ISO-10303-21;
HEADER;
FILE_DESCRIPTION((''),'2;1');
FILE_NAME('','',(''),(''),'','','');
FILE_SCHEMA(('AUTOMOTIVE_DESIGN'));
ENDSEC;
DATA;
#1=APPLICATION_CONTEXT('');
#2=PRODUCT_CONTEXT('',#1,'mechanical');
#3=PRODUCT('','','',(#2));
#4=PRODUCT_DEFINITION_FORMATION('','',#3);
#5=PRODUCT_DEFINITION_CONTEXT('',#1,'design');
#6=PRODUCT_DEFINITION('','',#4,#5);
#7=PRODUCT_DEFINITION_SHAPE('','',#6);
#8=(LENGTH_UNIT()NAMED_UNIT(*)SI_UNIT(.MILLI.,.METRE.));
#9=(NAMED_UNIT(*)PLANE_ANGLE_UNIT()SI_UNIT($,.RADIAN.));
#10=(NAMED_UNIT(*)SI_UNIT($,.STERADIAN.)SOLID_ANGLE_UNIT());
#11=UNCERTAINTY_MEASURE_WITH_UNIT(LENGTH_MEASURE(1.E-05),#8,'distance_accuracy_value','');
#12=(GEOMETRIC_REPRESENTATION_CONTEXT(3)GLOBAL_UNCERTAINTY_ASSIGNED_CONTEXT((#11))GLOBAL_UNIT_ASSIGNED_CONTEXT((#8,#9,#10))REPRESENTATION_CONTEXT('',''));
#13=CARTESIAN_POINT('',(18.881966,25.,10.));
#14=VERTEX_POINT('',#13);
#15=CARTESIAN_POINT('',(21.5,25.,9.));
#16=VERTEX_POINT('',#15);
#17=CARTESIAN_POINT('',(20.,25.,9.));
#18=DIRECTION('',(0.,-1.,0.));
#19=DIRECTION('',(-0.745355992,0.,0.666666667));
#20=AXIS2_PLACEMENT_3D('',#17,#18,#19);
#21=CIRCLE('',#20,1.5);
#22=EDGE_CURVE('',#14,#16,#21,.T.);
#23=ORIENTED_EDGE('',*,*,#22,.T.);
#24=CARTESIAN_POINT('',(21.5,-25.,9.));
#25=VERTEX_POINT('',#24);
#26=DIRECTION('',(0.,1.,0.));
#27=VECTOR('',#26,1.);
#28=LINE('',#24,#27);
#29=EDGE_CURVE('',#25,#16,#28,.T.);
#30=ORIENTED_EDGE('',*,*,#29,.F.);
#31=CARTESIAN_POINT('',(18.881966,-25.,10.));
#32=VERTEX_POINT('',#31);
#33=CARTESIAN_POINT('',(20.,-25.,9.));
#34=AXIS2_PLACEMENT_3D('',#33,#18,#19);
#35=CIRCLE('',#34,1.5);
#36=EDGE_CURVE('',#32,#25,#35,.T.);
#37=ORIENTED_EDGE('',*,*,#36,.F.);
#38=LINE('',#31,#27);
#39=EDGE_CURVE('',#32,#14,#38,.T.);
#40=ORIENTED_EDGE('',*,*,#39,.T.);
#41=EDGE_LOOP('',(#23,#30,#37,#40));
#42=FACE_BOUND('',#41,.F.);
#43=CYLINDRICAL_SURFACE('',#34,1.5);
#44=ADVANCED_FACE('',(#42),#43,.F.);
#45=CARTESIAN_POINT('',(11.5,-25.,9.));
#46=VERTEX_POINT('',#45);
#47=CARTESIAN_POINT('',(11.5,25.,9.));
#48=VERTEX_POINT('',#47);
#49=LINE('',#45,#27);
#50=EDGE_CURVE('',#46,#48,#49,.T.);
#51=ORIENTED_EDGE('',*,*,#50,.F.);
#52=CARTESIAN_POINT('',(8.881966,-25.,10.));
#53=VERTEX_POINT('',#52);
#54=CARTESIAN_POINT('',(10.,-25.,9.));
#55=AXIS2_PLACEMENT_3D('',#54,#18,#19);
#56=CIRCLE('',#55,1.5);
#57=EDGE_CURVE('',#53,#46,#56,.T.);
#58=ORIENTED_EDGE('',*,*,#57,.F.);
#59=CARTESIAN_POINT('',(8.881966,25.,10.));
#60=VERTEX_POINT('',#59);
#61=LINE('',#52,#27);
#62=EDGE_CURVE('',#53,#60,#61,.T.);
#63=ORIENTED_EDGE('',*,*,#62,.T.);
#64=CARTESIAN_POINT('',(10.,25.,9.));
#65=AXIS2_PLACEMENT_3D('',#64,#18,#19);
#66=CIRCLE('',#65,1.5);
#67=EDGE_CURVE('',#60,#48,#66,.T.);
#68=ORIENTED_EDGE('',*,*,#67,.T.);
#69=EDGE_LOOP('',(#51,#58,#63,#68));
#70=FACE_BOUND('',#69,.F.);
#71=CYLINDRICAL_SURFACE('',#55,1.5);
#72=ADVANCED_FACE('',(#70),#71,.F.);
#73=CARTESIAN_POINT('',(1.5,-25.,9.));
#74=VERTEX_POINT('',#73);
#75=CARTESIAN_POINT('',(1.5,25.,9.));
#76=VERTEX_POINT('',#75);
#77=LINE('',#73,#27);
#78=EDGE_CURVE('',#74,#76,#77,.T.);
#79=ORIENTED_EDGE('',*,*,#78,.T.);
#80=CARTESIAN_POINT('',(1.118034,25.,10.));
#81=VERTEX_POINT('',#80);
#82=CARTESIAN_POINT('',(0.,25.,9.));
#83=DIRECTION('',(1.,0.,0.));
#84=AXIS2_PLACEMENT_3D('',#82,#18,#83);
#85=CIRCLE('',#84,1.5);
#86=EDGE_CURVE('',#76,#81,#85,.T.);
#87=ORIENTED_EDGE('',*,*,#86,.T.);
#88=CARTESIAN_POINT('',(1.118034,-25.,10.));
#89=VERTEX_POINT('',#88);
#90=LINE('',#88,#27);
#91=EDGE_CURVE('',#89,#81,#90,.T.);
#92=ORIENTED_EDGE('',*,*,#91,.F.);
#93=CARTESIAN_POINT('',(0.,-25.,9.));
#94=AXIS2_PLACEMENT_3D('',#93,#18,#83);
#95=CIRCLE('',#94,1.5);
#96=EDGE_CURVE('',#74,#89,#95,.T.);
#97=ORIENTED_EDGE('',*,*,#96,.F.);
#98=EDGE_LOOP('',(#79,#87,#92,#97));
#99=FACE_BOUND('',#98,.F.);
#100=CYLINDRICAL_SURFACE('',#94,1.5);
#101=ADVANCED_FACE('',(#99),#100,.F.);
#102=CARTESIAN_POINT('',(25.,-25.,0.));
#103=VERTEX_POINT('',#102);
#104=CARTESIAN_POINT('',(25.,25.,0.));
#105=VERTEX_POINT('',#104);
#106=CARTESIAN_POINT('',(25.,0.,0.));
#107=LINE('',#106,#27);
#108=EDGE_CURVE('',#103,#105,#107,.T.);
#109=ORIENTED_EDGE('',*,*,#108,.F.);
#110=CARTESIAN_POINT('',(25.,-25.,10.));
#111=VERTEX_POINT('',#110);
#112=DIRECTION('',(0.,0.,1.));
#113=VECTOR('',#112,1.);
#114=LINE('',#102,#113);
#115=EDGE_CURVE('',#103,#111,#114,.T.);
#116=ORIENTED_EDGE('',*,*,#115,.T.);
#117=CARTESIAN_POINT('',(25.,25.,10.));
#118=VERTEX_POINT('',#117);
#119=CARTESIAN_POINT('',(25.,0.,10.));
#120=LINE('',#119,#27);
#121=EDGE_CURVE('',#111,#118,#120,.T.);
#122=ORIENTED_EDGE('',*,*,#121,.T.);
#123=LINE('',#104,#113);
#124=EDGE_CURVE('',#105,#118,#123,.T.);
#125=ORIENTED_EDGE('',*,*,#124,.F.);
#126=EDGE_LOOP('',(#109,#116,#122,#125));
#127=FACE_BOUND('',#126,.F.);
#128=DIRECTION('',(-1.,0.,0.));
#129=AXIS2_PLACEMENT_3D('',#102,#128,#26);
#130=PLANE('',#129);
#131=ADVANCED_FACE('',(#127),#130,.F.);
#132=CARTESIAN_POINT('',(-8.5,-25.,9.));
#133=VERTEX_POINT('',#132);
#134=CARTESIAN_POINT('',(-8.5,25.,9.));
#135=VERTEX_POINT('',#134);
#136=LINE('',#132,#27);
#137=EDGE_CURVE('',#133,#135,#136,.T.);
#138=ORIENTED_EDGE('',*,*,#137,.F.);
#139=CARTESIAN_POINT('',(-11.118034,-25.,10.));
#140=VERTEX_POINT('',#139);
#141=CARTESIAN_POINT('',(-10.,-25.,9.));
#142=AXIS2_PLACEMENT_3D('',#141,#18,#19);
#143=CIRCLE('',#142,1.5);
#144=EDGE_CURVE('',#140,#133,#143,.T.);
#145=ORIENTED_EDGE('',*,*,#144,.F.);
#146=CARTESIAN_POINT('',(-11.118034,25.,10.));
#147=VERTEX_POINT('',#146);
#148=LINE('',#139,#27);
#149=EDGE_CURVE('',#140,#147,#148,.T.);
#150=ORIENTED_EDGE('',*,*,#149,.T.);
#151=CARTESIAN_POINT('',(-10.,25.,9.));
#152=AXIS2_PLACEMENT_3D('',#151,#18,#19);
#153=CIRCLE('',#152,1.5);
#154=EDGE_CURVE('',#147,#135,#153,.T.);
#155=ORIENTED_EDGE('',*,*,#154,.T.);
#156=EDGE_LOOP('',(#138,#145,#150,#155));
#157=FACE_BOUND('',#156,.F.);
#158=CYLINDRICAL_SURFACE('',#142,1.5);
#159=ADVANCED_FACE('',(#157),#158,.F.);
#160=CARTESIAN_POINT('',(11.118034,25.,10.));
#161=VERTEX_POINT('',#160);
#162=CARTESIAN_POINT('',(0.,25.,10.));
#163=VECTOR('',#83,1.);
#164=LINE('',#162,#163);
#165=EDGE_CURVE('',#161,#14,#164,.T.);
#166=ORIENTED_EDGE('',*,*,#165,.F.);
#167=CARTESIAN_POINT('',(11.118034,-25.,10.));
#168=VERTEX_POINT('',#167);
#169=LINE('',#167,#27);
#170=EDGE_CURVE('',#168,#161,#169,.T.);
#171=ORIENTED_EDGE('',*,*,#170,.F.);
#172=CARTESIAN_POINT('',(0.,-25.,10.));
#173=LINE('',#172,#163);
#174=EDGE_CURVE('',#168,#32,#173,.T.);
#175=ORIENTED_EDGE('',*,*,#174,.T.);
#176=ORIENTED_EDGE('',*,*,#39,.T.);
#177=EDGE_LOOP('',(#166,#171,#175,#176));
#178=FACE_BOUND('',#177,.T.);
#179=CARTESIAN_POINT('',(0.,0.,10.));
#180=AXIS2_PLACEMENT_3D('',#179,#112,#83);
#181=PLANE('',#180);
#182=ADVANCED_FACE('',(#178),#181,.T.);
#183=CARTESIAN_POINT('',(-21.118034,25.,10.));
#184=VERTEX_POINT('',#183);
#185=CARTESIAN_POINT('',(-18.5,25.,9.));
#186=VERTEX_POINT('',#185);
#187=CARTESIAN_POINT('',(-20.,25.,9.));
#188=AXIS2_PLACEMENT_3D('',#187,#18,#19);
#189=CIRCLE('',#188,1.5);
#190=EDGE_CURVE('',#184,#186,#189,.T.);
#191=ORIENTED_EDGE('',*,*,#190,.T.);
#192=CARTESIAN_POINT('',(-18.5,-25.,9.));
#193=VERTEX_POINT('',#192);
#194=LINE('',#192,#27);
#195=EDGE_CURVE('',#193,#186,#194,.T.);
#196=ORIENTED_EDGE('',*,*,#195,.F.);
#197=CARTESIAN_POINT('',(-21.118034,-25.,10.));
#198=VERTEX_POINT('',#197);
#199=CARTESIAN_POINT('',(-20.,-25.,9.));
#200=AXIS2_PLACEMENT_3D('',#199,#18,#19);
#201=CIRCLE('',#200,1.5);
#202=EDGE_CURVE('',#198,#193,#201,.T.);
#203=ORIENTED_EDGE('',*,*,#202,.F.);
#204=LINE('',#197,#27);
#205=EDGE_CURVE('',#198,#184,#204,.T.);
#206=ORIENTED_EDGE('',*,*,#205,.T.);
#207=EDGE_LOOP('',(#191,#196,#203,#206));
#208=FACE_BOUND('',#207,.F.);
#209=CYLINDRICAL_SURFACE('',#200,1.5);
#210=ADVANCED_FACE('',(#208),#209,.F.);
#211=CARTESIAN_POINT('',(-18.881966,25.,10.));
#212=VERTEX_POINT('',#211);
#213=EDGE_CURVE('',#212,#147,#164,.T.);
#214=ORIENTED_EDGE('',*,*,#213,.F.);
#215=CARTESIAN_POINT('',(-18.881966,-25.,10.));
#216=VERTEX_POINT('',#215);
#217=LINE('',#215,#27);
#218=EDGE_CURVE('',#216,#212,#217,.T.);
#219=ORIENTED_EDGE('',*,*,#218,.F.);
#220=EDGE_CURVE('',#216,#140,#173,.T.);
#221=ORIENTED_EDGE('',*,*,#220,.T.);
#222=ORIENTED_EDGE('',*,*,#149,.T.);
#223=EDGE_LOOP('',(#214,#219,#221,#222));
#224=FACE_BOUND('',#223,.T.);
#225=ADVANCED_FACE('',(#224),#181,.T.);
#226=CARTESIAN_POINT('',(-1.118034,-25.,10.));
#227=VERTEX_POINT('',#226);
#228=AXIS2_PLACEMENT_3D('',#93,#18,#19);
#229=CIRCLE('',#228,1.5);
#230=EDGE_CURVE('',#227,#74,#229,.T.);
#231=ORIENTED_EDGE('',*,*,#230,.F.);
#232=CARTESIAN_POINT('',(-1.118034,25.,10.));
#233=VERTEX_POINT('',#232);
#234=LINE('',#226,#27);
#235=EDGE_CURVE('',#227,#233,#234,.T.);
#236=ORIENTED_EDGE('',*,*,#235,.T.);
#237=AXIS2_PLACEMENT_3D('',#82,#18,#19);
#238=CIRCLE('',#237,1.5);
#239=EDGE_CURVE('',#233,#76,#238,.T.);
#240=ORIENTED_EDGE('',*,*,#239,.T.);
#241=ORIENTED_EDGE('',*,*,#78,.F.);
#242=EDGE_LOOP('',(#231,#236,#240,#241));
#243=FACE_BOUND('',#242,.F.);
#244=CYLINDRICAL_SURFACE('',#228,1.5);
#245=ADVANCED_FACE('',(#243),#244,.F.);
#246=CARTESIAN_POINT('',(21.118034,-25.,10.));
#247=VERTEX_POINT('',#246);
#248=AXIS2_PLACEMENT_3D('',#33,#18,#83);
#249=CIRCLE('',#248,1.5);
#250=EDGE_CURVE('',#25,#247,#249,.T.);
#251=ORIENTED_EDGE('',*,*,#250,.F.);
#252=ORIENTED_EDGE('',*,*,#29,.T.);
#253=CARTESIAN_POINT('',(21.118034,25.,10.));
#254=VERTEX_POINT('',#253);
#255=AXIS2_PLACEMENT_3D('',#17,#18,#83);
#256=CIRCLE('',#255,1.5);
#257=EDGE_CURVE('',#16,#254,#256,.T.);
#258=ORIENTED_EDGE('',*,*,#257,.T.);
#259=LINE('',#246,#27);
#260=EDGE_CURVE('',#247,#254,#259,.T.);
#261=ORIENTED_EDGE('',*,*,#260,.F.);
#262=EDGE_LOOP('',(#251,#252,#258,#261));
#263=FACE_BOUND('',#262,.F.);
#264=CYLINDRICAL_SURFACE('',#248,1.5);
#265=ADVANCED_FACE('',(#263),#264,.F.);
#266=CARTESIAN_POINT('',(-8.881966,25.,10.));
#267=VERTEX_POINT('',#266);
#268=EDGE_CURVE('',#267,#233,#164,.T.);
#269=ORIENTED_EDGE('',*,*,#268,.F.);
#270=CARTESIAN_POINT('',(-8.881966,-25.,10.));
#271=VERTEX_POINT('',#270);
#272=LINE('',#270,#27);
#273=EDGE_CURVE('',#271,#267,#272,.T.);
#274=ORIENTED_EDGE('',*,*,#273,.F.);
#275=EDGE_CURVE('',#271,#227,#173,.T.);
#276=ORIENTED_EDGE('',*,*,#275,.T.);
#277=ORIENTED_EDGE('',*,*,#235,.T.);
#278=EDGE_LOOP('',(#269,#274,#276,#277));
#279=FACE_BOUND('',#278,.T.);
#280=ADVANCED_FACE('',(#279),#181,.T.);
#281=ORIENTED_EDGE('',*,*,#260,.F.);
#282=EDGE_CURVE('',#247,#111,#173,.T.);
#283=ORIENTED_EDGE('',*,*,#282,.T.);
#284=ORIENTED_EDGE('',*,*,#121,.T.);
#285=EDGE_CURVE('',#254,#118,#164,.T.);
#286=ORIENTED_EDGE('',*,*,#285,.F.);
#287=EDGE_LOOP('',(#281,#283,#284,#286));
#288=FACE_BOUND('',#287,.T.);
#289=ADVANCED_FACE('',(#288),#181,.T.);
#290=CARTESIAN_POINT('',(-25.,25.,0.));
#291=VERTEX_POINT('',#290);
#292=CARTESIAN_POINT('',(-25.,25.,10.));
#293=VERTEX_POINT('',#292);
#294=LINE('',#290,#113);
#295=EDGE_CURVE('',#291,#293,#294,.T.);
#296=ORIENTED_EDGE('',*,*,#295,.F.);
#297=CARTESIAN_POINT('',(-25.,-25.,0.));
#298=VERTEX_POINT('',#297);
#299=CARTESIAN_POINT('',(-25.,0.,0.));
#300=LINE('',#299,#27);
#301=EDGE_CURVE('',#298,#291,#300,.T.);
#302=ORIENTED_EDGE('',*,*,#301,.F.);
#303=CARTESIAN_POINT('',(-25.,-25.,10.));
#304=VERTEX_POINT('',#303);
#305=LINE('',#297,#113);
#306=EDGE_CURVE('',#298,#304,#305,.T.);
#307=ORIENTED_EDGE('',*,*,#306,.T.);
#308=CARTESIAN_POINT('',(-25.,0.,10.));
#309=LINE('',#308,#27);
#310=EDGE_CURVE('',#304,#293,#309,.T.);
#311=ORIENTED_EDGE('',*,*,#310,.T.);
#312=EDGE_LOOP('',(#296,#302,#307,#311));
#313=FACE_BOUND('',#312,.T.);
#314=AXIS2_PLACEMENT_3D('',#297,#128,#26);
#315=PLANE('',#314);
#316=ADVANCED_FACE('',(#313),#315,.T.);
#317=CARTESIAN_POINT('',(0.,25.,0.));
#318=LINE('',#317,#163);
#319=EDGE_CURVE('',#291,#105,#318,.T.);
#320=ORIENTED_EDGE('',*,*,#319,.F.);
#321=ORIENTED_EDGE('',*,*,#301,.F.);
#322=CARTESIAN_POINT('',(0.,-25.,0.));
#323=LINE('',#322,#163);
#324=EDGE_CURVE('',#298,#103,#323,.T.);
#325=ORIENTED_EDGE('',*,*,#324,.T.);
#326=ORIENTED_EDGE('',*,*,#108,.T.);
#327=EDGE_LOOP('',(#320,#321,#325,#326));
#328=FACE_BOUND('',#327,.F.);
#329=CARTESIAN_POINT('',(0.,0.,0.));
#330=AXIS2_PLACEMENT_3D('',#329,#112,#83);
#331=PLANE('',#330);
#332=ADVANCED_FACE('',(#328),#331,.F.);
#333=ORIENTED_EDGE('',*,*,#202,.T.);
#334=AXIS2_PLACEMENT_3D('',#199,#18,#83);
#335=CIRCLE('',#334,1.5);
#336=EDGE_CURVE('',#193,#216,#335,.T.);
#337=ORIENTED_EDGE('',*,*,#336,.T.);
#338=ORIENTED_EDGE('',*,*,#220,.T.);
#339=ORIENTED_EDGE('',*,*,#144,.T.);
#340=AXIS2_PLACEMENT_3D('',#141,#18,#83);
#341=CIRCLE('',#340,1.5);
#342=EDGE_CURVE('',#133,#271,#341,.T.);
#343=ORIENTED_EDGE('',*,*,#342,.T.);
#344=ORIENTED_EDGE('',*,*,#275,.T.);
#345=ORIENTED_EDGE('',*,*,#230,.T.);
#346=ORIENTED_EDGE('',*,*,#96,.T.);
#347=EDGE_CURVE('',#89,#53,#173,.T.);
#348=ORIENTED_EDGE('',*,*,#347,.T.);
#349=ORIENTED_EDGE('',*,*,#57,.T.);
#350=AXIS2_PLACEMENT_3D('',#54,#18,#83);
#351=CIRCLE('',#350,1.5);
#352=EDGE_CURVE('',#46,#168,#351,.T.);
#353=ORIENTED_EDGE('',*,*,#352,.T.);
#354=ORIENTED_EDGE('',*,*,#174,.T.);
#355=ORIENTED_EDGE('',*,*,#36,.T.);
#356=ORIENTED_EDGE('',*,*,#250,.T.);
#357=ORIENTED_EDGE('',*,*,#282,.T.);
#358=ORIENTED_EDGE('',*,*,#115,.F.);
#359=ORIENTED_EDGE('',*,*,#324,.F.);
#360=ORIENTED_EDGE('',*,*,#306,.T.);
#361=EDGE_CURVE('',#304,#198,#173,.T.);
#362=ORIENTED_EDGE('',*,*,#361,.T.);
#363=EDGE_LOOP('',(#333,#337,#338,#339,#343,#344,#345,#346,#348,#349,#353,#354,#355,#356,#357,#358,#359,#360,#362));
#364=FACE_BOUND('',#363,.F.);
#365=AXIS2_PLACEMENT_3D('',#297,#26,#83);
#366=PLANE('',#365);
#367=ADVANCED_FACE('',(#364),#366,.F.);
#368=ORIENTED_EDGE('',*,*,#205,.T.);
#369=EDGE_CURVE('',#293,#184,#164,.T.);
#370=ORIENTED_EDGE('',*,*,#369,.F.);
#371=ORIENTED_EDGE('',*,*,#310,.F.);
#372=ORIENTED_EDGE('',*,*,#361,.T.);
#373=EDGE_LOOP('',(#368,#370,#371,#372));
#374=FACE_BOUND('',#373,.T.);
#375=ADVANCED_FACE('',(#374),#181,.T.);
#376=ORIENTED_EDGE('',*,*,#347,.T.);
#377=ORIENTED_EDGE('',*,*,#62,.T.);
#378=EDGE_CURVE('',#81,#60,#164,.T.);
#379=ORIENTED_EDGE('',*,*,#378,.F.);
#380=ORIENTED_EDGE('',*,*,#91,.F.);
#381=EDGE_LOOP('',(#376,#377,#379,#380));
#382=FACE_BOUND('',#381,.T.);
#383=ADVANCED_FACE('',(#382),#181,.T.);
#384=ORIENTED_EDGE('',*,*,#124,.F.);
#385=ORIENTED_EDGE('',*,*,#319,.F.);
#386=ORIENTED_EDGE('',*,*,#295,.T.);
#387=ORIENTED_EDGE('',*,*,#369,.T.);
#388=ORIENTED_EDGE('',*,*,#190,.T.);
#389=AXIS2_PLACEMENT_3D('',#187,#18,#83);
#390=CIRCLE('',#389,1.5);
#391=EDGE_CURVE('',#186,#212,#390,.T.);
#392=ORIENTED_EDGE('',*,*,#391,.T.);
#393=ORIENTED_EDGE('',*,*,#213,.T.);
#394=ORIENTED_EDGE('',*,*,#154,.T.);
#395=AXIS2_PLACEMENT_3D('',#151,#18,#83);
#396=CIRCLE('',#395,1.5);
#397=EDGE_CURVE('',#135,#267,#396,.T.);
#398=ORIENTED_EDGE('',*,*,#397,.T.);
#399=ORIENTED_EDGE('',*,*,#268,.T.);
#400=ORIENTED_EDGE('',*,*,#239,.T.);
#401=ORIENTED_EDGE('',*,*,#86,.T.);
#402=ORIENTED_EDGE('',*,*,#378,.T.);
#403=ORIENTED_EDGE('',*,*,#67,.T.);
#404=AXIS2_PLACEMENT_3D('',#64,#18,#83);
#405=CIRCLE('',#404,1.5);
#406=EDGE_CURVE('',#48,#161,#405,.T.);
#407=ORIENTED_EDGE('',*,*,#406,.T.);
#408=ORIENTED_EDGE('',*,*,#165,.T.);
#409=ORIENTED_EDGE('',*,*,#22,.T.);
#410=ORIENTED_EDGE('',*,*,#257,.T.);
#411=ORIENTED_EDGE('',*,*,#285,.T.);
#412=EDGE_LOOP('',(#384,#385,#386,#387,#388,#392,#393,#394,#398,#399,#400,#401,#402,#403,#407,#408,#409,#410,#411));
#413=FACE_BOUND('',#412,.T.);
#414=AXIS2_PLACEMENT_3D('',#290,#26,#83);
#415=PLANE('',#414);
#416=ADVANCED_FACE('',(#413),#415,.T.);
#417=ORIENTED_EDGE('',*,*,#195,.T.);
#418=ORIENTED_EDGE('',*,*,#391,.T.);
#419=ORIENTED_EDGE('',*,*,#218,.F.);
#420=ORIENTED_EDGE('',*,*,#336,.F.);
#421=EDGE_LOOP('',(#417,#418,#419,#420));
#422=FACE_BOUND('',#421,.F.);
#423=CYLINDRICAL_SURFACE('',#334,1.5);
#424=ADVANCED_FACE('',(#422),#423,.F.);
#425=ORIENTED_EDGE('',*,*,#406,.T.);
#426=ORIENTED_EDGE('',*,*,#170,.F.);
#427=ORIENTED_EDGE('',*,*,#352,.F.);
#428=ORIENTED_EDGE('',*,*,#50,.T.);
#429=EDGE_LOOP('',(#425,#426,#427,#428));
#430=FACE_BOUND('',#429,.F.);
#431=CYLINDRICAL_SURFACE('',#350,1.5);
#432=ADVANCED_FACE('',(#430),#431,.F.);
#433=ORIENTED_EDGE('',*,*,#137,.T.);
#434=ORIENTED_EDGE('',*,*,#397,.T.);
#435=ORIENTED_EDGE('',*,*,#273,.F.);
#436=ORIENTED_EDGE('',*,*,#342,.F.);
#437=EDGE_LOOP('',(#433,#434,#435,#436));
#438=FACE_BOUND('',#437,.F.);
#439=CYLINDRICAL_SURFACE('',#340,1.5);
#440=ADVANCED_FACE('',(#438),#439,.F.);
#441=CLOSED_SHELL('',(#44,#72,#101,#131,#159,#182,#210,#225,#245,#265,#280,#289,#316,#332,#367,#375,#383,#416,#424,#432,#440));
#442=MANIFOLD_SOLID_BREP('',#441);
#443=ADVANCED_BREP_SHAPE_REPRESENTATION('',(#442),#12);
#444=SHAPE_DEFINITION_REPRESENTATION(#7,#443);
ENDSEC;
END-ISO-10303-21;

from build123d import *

# Parameters (mm, degrees)
F0_W     = 50
F0_H     = 50
F1_DEPTH = 10
F3_DEPTH = 50.001


# Not quite as in the source:
# - a feature names something its author has since deleted; it is built from what else it names


with BuildPart() as f1:
    # F0 (on Top) → F1 (new body)
    with BuildSketch(Plane.XY):
        Rectangle(F0_W, F0_H)
    extrude(amount=F1_DEPTH)

    # F2 (on face) → F3 (cut, through all)
    with BuildSketch(Plane.XZ.offset(25)):
        with BuildLine():
            Line((8.8819660113, 10), (11.1180339887, 10))
            ThreePointArc((11.1180339887, 10), (10, 10.5), (8.8819660113, 10))
        make_face()
        with BuildLine():
            ThreePointArc((1.1180339887, 10), (0, 10.5), (-1.1180339887, 10))
            Line((-1.1180339887, 10), (1.1180339887, 10))
        make_face()
        with BuildLine():
            ThreePointArc((-8.8819660113, 10), (-10, 10.5), (-11.1180339887, 10))
            Line((-11.1180339887, 10), (-8.8819660113, 10))
        make_face()
        with BuildLine():
            ThreePointArc((-18.8819660113, 10), (-20, 10.5), (-21.1180339887, 10))
            Line((-21.1180339887, 10), (-18.8819660113, 10))
        make_face()
        with BuildLine():
            ThreePointArc((11.5, 9), (11.4012585384, 9.5352331347), (11.1180339887, 10))
            Line((11.1180339887, 10), (8.8819660113, 10))
            ThreePointArc((8.8819660113, 10), (9.4647668653, 7.5987414616), (11.5, 9))
        make_face()
        with BuildLine():
            Line((1.1180339887, 10), (-1.1180339887, 10))
            ThreePointArc((-1.1180339887, 10), (-0.5352331347, 7.5987414616), (1.5, 9))
            ThreePointArc((1.5, 9), (1.4012585384, 9.5352331347), (1.1180339887, 10))
        make_face()
        with BuildLine():
            Line((-8.8819660113, 10), (-11.1180339887, 10))
            ThreePointArc((-11.1180339887, 10), (-10.5352331347, 7.5987414616), (-8.5, 9))
            ThreePointArc((-8.5, 9), (-8.5987414616, 9.5352331347), (-8.8819660113, 10))
        make_face()
        with BuildLine():
            Line((-18.8819660113, 10), (-21.1180339887, 10))
            ThreePointArc((-21.1180339887, 10), (-20.5352331347, 7.5987414616), (-18.5, 9))
            ThreePointArc((-18.5, 9), (-18.5987414616, 9.5352331347), (-18.8819660113, 10))
        make_face()
        with BuildLine():
            ThreePointArc((21.5, 9), (21.4012585384, 9.5352331347), (21.1180339887, 10))
            Line((21.1180339887, 10), (18.8819660113, 10))
            ThreePointArc((18.8819660113, 10), (19.4647668653, 7.5987414616), (21.5, 9))
        make_face()
    extrude(amount=-F3_DEPTH, mode=Mode.SUBTRACT)


solid = f1.part
